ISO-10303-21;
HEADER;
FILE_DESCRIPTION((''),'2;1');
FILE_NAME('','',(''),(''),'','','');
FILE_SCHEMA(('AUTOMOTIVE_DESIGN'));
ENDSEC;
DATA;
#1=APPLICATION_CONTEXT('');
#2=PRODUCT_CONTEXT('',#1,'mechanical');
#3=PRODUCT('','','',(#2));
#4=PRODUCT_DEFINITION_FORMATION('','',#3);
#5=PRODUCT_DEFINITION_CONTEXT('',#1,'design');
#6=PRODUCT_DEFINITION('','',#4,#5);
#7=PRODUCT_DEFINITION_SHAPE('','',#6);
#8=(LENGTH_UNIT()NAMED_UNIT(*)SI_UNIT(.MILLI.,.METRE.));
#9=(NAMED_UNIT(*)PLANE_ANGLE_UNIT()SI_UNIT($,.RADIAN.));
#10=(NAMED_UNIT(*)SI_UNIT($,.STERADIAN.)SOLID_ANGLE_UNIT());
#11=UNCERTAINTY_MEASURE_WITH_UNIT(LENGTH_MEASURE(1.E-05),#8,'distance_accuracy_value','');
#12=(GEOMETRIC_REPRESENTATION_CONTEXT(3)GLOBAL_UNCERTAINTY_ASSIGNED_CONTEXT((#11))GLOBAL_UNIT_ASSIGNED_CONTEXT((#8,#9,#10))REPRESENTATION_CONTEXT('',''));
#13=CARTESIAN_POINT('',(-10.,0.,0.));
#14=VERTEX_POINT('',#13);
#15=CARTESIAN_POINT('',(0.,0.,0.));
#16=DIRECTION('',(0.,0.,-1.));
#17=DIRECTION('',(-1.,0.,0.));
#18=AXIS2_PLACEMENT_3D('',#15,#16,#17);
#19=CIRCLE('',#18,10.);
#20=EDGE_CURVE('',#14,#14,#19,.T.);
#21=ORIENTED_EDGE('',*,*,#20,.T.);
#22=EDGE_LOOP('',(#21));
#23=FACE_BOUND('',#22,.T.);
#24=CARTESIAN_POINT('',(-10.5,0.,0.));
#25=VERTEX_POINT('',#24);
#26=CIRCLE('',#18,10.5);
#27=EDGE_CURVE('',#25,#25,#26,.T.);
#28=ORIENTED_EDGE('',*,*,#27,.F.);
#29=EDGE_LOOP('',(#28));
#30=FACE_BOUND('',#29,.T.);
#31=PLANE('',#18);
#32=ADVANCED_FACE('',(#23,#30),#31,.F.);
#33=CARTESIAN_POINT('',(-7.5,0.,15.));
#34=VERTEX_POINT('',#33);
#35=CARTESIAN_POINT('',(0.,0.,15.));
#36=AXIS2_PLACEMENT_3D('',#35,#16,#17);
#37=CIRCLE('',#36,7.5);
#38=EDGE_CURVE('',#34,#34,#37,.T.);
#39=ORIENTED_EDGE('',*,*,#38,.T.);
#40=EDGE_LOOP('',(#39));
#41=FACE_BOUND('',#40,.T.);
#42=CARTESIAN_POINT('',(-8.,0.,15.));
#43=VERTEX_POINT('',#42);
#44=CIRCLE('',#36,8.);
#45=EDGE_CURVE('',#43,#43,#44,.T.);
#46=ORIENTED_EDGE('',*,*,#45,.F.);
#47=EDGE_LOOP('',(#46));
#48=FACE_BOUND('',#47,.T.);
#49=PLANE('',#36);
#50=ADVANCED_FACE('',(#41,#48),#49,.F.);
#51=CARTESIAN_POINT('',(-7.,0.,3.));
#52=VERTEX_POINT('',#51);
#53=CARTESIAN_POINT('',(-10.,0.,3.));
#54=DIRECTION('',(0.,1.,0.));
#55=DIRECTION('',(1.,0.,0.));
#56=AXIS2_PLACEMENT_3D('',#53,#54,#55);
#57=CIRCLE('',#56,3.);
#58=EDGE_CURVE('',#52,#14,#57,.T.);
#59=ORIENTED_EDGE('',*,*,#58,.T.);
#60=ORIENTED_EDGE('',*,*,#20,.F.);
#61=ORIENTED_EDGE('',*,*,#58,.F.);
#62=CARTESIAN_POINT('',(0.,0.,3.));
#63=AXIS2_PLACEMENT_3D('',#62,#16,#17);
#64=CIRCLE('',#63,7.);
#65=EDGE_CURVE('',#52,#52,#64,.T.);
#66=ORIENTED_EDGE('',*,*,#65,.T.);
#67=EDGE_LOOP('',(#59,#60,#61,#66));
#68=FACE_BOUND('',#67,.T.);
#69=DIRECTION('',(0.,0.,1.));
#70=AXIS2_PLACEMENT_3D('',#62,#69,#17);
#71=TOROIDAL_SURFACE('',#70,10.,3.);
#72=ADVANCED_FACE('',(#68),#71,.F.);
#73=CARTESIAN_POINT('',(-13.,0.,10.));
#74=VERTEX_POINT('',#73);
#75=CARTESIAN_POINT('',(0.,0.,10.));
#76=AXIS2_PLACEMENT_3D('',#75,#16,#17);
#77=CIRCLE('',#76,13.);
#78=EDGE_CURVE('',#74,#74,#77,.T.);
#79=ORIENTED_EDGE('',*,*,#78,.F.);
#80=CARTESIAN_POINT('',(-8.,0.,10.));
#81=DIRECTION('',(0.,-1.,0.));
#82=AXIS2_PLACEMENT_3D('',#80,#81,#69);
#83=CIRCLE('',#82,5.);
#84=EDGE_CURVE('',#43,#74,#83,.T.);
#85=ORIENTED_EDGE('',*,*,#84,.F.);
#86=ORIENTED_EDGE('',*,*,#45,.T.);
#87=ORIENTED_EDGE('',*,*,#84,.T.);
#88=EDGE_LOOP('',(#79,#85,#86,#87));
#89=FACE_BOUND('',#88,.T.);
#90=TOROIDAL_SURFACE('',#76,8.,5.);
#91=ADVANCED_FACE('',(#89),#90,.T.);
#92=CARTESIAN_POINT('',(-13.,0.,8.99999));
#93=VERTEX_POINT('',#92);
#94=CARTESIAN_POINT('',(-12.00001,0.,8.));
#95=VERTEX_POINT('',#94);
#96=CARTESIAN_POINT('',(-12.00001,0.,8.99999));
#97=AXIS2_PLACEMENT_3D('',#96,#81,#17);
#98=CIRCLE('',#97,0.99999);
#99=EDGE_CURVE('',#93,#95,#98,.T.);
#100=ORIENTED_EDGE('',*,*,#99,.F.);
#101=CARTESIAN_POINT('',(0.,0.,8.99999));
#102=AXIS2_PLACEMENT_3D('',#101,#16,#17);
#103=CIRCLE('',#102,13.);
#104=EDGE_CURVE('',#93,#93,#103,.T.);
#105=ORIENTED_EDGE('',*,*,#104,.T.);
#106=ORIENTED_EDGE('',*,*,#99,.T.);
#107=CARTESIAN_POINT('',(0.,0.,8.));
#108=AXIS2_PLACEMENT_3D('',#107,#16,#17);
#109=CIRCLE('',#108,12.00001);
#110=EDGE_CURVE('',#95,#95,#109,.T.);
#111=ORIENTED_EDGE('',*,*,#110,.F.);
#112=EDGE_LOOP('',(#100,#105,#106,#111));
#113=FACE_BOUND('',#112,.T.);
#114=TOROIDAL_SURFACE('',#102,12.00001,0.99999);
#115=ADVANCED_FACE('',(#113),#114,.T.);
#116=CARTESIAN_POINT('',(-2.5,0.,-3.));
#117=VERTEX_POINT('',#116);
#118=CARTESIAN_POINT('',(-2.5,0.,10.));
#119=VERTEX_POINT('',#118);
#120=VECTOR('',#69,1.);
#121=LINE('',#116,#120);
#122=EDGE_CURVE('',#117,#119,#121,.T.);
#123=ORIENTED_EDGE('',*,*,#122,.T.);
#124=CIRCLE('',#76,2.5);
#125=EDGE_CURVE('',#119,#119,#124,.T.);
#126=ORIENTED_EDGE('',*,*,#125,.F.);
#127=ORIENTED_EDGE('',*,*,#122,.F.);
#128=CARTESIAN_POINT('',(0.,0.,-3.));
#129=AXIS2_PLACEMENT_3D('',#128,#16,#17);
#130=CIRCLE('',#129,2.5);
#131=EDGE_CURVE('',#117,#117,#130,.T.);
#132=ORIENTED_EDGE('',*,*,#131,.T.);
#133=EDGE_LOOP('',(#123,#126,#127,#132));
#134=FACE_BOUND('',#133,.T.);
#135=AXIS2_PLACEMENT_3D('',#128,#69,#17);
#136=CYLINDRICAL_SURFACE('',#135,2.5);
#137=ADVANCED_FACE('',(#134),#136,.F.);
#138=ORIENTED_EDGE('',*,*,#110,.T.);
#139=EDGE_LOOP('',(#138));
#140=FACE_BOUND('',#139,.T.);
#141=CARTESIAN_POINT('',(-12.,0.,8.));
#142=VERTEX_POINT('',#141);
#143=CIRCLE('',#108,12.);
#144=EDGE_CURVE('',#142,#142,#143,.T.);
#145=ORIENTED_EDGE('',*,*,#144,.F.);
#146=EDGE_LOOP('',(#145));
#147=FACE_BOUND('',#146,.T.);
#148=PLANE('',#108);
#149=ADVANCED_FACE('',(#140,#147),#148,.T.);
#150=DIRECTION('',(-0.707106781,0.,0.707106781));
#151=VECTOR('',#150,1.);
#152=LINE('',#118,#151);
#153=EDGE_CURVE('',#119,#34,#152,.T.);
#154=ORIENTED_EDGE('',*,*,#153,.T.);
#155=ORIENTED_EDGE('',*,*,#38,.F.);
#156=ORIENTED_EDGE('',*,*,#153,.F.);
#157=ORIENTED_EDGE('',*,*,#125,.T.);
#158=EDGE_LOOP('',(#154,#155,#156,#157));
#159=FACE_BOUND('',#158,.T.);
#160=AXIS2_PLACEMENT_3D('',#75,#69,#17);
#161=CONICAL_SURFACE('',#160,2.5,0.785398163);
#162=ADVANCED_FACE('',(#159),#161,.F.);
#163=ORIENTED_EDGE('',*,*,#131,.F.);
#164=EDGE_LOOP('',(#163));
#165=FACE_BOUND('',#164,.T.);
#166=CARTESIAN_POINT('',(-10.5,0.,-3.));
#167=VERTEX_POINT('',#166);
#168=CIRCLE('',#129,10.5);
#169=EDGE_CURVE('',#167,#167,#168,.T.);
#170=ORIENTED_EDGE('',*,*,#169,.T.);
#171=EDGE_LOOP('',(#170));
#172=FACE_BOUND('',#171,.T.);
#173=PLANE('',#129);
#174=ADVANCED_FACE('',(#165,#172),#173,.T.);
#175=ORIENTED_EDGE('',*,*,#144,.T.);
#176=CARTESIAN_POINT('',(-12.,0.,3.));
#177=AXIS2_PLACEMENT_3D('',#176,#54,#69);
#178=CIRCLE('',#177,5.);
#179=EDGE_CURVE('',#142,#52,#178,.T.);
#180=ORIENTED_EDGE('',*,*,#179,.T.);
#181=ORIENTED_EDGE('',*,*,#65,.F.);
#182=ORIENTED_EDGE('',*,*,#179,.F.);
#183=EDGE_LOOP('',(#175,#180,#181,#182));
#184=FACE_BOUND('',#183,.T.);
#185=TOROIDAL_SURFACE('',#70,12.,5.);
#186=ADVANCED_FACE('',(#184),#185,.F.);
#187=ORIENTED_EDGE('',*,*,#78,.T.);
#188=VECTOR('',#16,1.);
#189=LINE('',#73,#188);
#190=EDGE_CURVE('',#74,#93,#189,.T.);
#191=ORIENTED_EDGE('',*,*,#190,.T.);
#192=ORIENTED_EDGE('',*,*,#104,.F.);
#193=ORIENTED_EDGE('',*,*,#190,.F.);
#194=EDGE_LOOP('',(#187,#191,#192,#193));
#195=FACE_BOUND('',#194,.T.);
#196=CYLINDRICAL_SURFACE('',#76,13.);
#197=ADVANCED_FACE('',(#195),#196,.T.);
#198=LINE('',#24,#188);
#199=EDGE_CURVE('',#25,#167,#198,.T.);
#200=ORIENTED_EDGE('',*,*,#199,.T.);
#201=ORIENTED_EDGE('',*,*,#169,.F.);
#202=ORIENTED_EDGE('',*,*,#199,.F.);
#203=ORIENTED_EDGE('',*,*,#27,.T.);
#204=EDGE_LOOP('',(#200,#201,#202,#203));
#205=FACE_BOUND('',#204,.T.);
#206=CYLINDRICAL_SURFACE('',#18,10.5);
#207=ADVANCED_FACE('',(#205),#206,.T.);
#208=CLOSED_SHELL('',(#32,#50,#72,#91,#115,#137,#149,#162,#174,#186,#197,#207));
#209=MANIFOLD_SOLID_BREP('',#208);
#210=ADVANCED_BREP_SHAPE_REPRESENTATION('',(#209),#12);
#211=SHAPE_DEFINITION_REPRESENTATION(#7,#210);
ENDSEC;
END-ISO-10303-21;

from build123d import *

# Parameters (mm, degrees)
F2_SIZE = 5
F3_R    = 0.99999


# Not quite as in the source:
# - a fillet or chamfer is up to 0.001 mm smaller than in the source, because OpenCascade refuses the exact size


with BuildPart() as f1:
    # F0 (on Front) → F1 (revolve)
    with BuildSketch(Plane.XZ):
        with BuildLine():
            Line((-2.5, -3), (-2.5, 0))
            Line((-2.5, 0), (-2.5, 15))
            Line((-2.5, 15), (-8, 15))
            ThreePointArc((-8, 15), (-11.5355339059, 13.5355339059), (-13, 10))
            Line((-13, 10), (-13, 8))
            Line((-13, 8), (-12, 8))
            ThreePointArc((-12, 8), (-8.4644660941, 6.5355339059), (-7, 3))
            ThreePointArc((-7, 3), (-7.8786796564, 0.8786796564), (-10, 0))
            Line((-10, 0), (-10.5, 0))
            Line((-10.5, 0), (-10.5, -3))
            Line((-10.5, -3), (-2.5, -3))
        make_face()
    revolve(axis=Axis((0, 0, 3.244361095), (0, 0, -1)))

    # F2
    f2_edges = [f1.edges().sort_by_distance(p)[0] for p in [
        (2.5, 0, 15),
    ]]
    chamfer(f2_edges, length=F2_SIZE)

    # F3 (radius 1 in the source; OpenCascade refuses exactly that, so slightly less here)
    f3_edges = [f1.edges().sort_by_distance(p)[0] for p in [
        (13, 0, 8),
    ]]
    fillet(f3_edges, radius=F3_R)


solid = f1.part
